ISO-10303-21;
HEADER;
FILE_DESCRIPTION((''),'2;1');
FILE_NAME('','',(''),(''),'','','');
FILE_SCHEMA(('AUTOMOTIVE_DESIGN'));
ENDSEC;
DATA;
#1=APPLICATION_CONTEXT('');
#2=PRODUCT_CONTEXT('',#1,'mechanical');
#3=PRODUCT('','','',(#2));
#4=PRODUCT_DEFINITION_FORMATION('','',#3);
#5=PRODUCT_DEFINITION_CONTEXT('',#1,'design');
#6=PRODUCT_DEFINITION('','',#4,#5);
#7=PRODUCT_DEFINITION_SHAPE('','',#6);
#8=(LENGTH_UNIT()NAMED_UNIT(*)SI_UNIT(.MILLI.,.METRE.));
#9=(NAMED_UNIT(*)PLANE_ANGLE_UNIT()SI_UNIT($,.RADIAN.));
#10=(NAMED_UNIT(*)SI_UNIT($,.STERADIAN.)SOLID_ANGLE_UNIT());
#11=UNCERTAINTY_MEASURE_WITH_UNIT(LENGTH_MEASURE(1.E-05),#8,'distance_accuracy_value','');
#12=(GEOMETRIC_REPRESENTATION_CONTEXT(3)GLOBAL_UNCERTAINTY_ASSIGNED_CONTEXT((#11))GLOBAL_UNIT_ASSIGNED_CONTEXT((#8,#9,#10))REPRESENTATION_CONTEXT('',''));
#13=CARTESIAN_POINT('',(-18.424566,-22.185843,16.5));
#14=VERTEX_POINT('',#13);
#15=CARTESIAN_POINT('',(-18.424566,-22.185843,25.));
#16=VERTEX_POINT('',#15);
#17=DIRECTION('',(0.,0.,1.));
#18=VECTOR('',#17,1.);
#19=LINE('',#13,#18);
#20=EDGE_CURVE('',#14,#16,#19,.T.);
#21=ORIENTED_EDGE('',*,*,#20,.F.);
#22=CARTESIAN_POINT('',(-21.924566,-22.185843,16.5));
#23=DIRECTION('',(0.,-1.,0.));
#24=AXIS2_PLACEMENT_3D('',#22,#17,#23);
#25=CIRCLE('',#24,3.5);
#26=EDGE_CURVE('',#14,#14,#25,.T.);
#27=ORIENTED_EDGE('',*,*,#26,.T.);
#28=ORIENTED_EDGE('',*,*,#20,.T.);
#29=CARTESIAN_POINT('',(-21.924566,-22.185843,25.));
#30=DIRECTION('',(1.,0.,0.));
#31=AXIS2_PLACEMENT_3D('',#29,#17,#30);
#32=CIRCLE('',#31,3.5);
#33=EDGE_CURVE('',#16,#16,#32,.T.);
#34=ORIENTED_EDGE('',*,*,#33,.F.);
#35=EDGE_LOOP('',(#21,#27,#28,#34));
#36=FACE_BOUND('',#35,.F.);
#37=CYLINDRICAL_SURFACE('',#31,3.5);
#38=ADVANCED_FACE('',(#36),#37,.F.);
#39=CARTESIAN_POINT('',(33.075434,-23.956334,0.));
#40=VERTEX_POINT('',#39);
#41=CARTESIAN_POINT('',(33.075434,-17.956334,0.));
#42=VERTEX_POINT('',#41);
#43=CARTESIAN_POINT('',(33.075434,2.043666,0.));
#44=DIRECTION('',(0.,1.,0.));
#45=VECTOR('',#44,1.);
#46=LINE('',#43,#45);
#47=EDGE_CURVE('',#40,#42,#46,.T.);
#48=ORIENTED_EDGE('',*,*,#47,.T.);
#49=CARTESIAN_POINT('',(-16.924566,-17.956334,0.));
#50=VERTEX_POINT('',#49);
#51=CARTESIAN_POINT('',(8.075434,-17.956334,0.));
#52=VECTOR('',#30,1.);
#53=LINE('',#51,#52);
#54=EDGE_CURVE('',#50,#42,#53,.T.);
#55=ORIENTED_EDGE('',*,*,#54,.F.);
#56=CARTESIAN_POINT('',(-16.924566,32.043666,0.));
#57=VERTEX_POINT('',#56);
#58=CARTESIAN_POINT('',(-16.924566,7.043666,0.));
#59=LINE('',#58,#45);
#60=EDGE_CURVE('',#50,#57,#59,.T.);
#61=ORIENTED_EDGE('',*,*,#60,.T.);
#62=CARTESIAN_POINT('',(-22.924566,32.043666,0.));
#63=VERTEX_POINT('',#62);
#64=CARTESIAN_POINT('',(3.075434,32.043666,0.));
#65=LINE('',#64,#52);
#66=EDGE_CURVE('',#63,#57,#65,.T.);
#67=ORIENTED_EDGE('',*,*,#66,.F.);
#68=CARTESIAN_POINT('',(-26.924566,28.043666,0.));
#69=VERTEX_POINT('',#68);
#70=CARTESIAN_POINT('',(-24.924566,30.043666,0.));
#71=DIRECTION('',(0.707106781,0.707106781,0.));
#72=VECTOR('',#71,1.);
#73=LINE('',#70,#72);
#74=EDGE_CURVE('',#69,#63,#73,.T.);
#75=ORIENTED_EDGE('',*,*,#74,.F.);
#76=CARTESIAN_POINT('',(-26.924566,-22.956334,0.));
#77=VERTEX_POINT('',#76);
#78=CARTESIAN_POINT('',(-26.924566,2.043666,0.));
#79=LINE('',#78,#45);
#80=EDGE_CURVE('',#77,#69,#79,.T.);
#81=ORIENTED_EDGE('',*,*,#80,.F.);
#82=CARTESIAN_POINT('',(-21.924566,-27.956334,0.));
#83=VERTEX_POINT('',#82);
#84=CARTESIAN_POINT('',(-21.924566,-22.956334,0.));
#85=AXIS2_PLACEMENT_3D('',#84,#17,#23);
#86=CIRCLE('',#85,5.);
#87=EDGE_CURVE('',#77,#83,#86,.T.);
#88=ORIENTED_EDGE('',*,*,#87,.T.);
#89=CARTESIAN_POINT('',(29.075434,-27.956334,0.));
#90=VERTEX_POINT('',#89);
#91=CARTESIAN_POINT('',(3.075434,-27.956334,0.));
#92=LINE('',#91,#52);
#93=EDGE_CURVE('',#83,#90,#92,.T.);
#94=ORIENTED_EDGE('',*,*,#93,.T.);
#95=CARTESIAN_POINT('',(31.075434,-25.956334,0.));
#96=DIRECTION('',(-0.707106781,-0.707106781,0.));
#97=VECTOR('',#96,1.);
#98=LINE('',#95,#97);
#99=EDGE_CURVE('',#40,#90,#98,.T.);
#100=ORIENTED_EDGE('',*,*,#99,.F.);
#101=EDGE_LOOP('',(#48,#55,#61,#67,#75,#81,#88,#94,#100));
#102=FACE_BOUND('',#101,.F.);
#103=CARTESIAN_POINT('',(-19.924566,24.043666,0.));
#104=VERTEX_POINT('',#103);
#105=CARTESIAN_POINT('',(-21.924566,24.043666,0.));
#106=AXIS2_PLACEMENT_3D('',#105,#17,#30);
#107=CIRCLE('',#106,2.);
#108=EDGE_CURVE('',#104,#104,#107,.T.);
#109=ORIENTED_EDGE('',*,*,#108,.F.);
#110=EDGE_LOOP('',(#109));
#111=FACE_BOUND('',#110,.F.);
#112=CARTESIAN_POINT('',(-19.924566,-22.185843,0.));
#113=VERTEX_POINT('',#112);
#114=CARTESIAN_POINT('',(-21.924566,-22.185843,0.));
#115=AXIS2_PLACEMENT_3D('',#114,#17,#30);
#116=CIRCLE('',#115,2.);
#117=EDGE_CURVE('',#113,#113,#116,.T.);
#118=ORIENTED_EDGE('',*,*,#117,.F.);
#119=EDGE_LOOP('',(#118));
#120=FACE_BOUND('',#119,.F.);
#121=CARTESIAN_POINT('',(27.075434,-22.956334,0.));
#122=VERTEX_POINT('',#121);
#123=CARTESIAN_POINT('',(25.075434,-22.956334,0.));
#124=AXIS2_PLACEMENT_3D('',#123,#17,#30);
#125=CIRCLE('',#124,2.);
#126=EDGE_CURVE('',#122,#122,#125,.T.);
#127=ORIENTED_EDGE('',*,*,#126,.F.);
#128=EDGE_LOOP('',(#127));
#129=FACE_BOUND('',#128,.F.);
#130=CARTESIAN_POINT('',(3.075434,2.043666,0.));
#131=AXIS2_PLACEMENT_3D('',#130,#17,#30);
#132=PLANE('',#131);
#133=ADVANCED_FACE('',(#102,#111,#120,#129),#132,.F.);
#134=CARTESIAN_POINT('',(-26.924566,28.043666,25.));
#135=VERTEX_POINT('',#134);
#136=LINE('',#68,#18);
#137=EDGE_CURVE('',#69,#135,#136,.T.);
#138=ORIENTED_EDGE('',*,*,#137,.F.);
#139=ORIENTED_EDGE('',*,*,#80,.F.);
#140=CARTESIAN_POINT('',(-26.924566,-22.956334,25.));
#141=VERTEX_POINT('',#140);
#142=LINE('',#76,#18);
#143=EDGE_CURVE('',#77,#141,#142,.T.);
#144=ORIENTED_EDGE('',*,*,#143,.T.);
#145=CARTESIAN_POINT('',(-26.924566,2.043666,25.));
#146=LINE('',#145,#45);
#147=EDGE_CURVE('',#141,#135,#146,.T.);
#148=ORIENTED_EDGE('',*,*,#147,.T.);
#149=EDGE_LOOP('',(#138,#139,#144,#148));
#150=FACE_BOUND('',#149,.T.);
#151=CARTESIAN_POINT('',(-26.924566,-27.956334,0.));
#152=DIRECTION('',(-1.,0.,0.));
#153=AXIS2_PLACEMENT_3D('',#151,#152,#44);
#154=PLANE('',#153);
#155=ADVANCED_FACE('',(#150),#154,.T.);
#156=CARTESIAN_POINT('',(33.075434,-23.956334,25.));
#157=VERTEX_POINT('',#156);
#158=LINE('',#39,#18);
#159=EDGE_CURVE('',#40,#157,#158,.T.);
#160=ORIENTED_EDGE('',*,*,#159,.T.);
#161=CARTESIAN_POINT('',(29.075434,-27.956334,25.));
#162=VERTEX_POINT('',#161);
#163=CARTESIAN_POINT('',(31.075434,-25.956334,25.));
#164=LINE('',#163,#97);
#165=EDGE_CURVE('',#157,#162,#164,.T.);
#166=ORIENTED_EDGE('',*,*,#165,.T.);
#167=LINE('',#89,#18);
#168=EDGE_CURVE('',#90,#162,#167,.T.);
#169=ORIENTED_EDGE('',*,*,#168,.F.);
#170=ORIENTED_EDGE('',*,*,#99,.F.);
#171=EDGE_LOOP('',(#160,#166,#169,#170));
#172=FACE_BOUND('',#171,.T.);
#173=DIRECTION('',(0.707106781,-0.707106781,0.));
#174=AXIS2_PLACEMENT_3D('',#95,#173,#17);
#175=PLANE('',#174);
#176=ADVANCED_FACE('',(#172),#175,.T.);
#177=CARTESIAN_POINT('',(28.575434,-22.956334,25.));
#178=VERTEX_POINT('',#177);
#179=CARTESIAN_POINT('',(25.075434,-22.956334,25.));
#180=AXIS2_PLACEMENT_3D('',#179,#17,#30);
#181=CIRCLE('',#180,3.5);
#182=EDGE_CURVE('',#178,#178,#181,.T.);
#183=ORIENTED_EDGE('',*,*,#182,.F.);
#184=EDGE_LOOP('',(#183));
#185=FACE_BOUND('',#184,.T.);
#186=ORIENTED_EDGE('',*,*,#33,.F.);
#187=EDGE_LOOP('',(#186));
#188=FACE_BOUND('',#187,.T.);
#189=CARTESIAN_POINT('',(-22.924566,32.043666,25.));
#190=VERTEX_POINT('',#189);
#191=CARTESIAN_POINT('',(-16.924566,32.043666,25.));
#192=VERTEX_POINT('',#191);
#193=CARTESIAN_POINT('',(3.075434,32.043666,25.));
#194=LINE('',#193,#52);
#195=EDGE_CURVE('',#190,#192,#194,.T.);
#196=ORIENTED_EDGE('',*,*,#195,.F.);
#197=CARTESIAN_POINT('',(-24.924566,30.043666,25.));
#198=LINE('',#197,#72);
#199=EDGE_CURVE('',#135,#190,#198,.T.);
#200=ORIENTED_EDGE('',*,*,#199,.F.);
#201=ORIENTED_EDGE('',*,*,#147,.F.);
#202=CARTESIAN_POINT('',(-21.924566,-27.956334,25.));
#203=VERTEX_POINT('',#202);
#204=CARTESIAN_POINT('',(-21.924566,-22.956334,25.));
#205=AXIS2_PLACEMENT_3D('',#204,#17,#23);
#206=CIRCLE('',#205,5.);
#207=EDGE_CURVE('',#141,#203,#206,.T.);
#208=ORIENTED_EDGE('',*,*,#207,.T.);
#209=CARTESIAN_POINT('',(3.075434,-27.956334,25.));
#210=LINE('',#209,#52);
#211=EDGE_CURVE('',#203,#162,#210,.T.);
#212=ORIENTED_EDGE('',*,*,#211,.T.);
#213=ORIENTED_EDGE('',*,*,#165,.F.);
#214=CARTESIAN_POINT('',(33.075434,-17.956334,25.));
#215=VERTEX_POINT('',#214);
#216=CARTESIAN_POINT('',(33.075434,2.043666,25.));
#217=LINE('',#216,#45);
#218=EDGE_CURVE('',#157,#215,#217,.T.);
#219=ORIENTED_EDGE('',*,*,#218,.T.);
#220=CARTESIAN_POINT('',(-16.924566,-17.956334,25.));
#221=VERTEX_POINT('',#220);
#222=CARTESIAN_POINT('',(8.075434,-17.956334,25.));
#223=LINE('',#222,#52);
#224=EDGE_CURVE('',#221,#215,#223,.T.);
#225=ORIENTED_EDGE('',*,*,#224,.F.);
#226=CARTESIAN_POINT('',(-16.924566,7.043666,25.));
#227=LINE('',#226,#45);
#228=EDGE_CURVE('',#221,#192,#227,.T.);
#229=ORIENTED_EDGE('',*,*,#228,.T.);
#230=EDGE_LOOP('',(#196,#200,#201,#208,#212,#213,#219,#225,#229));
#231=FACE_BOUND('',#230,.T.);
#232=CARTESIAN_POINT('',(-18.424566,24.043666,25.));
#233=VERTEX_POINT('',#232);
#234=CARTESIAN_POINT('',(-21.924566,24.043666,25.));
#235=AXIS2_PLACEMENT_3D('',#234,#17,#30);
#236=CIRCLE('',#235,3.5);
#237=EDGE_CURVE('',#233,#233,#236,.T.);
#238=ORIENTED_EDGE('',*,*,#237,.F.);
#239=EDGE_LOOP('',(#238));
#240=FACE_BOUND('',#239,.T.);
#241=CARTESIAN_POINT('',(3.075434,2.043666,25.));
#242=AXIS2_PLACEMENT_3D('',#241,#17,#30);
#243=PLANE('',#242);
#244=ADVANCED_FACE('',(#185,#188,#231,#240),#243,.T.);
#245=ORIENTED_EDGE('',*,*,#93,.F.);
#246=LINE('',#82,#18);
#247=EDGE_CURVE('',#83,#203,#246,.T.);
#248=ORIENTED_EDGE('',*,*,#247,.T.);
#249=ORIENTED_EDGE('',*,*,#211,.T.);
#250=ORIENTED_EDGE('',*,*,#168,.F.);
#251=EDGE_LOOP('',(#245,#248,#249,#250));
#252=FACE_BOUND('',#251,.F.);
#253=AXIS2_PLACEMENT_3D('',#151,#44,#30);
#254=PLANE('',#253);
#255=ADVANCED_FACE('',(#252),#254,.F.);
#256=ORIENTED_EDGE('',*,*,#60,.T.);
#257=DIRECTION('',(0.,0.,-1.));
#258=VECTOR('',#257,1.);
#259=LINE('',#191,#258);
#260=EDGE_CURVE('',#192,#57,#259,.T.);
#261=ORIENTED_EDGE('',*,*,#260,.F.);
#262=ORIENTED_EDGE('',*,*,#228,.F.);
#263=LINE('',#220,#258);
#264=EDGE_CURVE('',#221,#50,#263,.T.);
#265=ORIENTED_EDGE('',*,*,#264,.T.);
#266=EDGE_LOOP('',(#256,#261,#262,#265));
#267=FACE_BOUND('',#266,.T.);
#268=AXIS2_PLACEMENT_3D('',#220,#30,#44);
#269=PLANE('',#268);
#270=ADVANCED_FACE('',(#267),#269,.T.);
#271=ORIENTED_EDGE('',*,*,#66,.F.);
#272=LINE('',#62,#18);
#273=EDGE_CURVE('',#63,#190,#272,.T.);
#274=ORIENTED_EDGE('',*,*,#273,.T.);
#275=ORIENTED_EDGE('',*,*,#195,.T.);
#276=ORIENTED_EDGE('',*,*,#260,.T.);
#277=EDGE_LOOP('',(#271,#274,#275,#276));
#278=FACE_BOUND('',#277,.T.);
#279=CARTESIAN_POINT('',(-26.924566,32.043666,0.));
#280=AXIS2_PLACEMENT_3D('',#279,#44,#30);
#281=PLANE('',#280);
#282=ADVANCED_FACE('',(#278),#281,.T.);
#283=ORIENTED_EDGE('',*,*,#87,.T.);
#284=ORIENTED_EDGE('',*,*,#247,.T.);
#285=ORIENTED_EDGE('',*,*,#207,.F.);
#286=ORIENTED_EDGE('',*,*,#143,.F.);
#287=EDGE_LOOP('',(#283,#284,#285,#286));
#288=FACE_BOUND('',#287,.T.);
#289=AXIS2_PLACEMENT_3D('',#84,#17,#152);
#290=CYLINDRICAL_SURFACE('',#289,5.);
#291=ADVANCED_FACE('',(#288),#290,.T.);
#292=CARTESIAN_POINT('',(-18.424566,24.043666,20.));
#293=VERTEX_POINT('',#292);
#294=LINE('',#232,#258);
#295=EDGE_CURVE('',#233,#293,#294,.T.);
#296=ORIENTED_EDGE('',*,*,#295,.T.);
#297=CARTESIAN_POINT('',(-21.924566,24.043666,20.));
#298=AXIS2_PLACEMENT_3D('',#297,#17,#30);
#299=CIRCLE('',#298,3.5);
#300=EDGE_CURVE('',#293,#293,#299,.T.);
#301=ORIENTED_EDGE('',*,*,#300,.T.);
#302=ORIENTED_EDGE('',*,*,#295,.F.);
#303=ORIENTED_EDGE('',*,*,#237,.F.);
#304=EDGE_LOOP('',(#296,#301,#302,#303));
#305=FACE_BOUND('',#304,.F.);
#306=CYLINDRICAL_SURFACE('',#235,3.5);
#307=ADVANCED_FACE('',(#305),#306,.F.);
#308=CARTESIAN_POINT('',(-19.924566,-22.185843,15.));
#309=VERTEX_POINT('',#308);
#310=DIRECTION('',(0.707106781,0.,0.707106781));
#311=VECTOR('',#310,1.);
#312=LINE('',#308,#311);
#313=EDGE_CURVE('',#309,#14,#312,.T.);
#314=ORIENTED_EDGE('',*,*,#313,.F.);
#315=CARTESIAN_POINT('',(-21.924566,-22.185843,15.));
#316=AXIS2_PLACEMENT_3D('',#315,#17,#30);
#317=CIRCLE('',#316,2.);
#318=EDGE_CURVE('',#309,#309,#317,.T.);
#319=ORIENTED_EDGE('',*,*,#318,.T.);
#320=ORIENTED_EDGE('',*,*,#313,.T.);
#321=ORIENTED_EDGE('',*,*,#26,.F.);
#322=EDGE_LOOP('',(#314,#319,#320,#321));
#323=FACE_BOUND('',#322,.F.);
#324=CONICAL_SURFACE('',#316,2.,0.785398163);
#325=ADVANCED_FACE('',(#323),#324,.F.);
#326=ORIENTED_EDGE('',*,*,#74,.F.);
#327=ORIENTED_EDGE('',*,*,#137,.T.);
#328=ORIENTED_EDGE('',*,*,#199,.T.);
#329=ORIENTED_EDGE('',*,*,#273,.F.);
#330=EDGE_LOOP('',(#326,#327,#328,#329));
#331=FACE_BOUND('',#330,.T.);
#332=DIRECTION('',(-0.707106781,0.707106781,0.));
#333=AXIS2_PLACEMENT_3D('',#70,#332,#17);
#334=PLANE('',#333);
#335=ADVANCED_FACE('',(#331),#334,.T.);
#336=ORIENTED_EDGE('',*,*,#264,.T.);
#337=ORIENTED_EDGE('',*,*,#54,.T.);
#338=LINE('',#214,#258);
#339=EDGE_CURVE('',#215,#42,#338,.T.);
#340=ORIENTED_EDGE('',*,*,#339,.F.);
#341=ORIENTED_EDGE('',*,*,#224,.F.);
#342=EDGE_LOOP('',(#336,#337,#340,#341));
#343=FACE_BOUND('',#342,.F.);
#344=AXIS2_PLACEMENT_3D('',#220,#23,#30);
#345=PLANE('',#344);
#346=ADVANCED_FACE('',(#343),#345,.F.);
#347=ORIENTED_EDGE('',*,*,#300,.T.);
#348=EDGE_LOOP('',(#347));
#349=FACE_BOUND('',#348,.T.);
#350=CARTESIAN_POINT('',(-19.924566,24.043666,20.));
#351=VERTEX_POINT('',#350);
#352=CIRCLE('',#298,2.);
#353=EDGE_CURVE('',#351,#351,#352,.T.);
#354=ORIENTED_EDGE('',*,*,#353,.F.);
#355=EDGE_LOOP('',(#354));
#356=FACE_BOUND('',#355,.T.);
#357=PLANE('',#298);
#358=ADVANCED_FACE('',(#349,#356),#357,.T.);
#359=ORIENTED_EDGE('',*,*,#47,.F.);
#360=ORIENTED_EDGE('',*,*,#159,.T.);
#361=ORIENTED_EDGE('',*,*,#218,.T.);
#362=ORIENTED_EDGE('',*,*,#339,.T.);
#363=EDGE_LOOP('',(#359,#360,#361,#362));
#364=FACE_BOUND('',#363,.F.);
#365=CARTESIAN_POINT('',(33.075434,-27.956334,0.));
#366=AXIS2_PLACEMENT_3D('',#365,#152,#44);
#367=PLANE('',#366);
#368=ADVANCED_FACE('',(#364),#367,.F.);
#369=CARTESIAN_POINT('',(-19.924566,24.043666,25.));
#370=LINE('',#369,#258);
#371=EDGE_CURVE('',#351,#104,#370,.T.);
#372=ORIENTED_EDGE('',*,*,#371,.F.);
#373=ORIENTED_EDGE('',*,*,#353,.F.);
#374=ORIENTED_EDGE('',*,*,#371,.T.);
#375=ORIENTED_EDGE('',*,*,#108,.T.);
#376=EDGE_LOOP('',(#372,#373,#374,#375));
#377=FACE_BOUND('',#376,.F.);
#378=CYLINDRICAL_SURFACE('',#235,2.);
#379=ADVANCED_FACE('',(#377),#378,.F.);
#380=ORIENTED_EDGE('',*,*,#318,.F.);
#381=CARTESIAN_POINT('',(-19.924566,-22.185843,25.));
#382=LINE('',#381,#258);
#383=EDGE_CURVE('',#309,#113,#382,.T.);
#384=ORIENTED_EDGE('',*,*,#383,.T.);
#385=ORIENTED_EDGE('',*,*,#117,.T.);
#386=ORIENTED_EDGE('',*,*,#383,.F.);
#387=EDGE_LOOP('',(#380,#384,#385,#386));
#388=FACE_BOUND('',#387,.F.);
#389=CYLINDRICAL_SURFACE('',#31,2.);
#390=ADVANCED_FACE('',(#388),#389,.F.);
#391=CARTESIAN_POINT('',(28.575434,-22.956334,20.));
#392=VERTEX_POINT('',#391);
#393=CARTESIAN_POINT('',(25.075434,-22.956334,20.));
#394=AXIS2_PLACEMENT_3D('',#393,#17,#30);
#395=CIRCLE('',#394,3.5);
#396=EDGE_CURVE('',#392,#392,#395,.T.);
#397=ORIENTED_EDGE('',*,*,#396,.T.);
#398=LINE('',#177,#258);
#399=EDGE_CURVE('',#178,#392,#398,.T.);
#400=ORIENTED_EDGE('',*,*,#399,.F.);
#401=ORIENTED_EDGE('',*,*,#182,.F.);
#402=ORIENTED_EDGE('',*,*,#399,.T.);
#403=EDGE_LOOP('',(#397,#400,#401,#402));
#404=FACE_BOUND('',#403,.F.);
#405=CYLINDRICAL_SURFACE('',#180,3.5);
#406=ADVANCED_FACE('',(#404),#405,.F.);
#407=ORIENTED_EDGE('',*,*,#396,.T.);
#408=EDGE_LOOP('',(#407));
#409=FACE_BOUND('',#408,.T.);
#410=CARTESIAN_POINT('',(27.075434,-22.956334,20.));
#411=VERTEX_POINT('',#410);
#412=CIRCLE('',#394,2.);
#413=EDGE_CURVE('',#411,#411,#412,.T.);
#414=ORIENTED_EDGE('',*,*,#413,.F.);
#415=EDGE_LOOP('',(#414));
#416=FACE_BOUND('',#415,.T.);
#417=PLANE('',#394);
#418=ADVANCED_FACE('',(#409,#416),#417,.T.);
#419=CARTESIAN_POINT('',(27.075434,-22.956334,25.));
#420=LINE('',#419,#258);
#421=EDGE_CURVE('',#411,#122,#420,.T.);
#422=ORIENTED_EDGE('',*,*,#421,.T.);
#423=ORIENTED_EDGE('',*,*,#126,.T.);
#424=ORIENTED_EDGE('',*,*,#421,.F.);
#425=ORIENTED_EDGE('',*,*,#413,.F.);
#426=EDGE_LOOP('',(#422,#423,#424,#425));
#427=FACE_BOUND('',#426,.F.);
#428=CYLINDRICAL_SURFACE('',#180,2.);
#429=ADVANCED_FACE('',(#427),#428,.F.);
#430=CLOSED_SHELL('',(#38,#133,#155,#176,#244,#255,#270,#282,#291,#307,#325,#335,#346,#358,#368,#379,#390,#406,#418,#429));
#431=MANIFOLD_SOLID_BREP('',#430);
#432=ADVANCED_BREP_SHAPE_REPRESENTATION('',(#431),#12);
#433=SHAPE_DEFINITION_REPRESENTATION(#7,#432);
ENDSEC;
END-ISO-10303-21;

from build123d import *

# Parameters (mm, degrees)
F0_W        = 60
F0_H        = 60
F1_DEPTH    = 25
F2_W        = 50
F2_H        = 50
F3_DEPTH    = 25
F4_R        = 5
F5_R        = 2
F6_DEPTH    = 28
F7_R        = 3.5
F8_DEPTH    = 5
F9_S5_R     = 3.5
F9_T6_DEPTH = 12
F10_SIZE    = 4


# Not quite as in the source:
# - a fillet or chamfer that OpenCascade refuses, or shapes differently, is made with other operations: its cross-section is extruded or revolved along the edge and cut away or added


with BuildPart() as f1:
    # F0 (on Top) → F1 (new body)
    with BuildSketch(Plane.XY):
        with Locations((3.075433895, 2.043666031)):
            Rectangle(F0_W, F0_H)
    extrude(amount=F1_DEPTH)

    # F2 (on face) → F3 (cut)
    with BuildSketch(Plane.XY.offset(25)):
        with Locations((8.075433895, 7.043666031)):
            Rectangle(F2_W, F2_H)
    extrude(amount=-F3_DEPTH, mode=Mode.SUBTRACT)

    # F4
    f4_edges = [f1.edges().sort_by_distance(p)[0] for p in [
        (-26.924566, -27.956334, 12.5),
    ]]
    fillet(f4_edges, radius=F4_R)

    # F5 (on face) → F6 (cut)
    with BuildSketch(Plane.XY.offset(25)):
        with Locations((-21.924566105, 24.043666031)):
            Circle(F5_R)
        with Locations((-21.924566105, -22.1858429265)):
            Circle(F5_R)
        with Locations((25.075433895, -22.956333969)):
            Circle(F5_R)
    extrude(amount=-F6_DEPTH, mode=Mode.SUBTRACT)

    # F7 (on face) → F8 (cut)
    with BuildSketch(Plane.XY.offset(25)):
        with Locations((-21.924566105, 24.043666031)):
            Circle(F7_R)
        with Locations((25.075433895, -22.956333969)):
            Circle(F7_R)
        with Locations((-21.924566105, -22.1858429265)):
            Circle(F7_R)
    extrude(amount=-F8_DEPTH, mode=Mode.SUBTRACT)

    # F9: chamfer of 5 on 1 edges, made by hand


with BuildPart() as f9_tool2:
    # F9_s3 → F9_t4 (revolve)
    with BuildSketch(Plane.XZ.offset(22.1858429265)):
        Polygon((-19.924566105, 15), (-14.924566105, 20), (-19.924566105, 20), align=None)
    revolve(axis=Axis((-21.924566105, -22.1858429265, 20), (0, 0, 1)))

    # F9_s5 → F9_t6 (intersect, symmetric)
    with BuildSketch(Plane.XY.offset(17.5)):
        with Locations((-21.924566105, -22.1858429265)):
            Circle(F9_S5_R)
    extrude(amount=F9_T6_DEPTH, both=True, mode=Mode.INTERSECT)


with BuildPart() as f1_1:
    add(f1.part)

    # F9_t1: cut F9_tool2
    add(f9_tool2.part, mode=Mode.SUBTRACT)

    # F10
    f10_edges = [f1_1.edges().sort_by_distance(p)[0] for p in [
        (-26.924566, 32.043666, 12.5),
        (33.075434, -27.956334, 12.5),
    ]]
    chamfer(f10_edges, length=F10_SIZE)


solid = f1_1.part
